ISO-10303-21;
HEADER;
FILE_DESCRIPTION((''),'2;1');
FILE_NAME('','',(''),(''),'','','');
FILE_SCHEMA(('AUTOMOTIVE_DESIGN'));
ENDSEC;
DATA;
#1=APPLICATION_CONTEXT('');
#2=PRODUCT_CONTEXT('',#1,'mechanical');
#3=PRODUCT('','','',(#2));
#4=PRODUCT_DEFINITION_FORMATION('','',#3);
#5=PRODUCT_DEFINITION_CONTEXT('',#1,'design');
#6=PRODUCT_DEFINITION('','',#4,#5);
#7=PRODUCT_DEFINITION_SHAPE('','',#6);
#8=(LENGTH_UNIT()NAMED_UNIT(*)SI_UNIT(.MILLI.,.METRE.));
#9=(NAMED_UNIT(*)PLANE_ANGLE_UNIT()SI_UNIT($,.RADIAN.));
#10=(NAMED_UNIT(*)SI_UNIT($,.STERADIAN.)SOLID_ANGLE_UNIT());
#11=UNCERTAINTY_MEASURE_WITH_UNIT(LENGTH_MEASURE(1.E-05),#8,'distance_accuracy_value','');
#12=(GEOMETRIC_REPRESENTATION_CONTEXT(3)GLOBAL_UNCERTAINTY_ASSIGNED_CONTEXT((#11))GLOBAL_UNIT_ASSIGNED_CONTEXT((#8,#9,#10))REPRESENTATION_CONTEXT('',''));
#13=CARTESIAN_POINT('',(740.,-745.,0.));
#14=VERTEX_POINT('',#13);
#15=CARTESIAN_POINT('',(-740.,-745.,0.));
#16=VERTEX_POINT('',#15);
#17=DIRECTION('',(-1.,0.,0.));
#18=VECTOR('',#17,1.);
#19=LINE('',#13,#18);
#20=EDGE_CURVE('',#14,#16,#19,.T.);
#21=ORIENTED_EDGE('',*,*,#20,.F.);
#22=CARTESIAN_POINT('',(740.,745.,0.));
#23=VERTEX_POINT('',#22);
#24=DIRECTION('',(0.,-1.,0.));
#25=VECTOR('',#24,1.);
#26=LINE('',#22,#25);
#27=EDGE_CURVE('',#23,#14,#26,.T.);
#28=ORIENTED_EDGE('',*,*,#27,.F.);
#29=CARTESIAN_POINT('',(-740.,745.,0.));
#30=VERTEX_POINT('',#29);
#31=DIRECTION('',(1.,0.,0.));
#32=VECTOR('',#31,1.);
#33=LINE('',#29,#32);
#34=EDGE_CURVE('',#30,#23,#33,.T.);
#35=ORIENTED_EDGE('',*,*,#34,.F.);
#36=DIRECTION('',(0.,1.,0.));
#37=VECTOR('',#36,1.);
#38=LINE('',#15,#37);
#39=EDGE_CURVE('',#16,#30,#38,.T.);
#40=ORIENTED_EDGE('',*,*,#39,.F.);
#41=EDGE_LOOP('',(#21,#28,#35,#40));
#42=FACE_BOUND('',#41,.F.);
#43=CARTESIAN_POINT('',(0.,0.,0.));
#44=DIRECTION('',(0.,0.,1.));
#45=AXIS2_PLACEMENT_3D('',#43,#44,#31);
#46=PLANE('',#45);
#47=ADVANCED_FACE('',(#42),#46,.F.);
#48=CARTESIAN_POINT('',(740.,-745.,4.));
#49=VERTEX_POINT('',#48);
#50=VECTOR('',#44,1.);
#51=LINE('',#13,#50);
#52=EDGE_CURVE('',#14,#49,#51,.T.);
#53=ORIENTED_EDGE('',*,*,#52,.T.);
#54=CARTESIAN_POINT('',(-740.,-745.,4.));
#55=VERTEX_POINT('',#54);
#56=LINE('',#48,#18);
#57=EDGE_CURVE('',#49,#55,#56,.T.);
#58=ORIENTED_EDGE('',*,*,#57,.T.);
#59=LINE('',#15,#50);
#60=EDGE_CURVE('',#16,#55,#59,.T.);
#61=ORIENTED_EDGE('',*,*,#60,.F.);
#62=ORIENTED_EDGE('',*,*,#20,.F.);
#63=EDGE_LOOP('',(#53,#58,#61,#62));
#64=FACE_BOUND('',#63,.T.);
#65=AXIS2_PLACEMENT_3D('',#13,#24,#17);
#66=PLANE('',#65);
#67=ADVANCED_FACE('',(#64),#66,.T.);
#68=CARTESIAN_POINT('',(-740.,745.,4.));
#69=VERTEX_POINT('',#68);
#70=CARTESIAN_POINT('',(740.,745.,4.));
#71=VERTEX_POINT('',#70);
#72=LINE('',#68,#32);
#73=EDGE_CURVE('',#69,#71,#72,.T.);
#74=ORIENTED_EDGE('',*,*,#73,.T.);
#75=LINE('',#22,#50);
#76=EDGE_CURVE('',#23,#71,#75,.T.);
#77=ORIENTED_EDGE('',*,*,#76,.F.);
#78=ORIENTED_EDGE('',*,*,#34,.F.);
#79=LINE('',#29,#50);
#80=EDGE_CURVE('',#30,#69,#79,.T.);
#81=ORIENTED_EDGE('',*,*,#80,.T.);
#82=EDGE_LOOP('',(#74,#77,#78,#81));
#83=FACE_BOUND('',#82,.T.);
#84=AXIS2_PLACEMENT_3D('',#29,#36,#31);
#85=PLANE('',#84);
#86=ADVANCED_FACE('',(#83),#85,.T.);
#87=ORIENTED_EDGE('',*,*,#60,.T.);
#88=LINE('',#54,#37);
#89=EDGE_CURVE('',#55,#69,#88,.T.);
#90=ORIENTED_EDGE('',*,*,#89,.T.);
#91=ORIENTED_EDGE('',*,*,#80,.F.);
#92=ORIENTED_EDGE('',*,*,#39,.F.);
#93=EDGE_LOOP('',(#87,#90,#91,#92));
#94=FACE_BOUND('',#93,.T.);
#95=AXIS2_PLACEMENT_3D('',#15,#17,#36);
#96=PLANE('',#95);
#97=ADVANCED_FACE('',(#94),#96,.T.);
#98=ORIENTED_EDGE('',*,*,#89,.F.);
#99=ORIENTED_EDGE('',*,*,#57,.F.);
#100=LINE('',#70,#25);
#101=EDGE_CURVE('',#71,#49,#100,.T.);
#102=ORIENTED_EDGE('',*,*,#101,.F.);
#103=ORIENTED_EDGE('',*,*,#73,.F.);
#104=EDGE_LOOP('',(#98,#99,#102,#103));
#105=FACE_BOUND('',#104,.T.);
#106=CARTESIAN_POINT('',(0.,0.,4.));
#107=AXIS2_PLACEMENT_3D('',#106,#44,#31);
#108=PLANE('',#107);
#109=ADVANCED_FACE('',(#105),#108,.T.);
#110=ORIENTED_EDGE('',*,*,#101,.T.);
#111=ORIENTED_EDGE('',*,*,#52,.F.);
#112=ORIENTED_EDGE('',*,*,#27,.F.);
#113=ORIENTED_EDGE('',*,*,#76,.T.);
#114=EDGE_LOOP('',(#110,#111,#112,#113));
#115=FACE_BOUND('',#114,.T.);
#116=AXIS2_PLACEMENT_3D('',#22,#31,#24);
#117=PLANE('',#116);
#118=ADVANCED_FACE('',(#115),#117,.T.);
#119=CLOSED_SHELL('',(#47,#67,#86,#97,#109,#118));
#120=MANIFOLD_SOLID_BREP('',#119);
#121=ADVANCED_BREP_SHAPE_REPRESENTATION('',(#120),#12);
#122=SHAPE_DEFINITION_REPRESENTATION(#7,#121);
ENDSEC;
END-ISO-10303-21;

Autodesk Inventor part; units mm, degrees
ref_plane "YZ Plane" through (0, 0, 0) normal (1, 0, 0) x (0, 1, 0)
ref_plane "XZ Plane" through (0, 0, 0) normal (0, 1, 0) x (-1, 0, 0)
ref_plane "XY Plane" through (0, 0, 0) normal (0, 0, 1) x (1, 0, 0)
sketch "Sketch1" plane through (0, 0, 0) normal (0, 0, 1) x (1, 0, 0)
  line L0 (740, -745) -> (-740, -745)
  line L1 (-740, -745) -> (-740, 745)
  line L2 (-740, 745) -> (740, 745)
  line L3 (740, 745) -> (740, -745)
  line L4 (740, -745) -> (-740, 745) construction
  line L5 (-740, -745) -> (740, 745) construction
  point P0 (0, 0)
  dimension "d0" = 1480
  dimension "d1" = 1490
extrude "Plate1" add sketch "Sketch1" along normal blind 4
sketch "Sketch2" plane through (0, 0, 4) normal (0, 0, 1) x (1, 0, 0)
  line L0 (-522.6585, -376.8166) -> (-522.6585, 27.0801) construction
  line L1 (-522.6585, 27.0801) -> (-472.0358, 27.0801) construction
  line L2 (-472.0358, 27.0801) -> (-472.0358, -376.8166) construction
  line L3 (-472.0358, -376.8166) -> (-522.6585, -376.8166) construction
  point P0 (0, 0)
mark "Mark1"
equation "\"d0\" = Лист_ширина"
equation "\"d1\" = 0.5 * Лист_длина"
equation "\"d2\" = Thickness"
equation "\"BendRadius\" = Thickness"
equation "\"BendReliefWidth\" = Thickness"
equation "\"BendReliefDepth\" = 0.5 * Thickness"
equation "\"CornerReliefSize\" = 4 * Thickness"
equation "\"MinimumRemnant\" = 2 * Thickness"
equation "\"TransitionRadius\" = BendRadius"
equation "\"JacobiRadiusSize\" = BendRadius"
equation "\"GapSize\" = Thickness"
equation "\"Лист_ширина\" = 1480"
equation "\"Лист_длина\" = 2980"
equation "\"Thickness\" = 4"
properties part number "GBK 2131 shield 3" material "Steel"
